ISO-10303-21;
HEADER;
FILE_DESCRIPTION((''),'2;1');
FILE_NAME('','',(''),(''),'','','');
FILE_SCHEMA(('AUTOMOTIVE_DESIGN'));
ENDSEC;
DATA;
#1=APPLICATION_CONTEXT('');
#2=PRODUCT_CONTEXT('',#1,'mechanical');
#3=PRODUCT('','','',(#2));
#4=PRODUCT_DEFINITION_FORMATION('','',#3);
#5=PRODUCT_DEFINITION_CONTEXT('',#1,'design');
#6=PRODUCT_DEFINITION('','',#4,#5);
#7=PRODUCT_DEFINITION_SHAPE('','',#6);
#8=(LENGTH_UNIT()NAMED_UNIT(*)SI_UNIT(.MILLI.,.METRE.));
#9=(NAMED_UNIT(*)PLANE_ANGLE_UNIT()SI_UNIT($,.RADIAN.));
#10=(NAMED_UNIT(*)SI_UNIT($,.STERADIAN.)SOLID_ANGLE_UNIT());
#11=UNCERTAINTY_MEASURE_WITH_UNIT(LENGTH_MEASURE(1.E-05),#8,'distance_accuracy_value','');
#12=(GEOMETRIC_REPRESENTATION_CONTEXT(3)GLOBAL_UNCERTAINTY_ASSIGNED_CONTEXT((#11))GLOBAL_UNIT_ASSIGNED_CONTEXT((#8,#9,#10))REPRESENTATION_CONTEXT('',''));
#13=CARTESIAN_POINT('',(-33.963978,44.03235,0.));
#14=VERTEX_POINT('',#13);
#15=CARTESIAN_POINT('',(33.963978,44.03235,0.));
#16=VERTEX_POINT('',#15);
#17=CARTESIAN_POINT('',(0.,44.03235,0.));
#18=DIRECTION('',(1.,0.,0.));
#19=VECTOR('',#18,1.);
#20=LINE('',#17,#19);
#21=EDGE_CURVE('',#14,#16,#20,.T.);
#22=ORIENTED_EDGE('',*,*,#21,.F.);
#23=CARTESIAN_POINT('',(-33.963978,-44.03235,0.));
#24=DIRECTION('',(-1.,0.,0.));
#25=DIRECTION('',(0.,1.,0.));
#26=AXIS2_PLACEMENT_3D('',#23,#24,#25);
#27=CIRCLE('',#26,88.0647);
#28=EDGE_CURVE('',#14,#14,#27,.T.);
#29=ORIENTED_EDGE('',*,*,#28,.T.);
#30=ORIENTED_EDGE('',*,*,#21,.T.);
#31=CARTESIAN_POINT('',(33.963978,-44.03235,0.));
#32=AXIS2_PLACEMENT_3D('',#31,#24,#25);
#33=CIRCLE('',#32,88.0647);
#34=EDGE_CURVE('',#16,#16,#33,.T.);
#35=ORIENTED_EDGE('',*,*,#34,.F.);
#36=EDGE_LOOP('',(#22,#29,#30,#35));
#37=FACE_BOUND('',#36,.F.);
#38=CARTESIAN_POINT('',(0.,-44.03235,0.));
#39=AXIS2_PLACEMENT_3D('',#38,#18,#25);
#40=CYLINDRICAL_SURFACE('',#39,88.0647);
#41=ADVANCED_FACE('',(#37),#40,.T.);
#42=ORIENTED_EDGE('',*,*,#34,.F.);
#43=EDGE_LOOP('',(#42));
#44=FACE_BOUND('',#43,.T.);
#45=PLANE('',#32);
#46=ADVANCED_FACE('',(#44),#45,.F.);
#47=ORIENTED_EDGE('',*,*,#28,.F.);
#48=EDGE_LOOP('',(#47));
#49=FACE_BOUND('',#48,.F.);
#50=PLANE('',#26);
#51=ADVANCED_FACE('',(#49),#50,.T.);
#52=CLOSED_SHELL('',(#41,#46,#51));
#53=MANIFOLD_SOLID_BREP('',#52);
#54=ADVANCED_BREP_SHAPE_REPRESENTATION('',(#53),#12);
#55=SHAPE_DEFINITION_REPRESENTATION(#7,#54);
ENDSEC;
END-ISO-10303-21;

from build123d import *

# Parameters (mm, degrees)
F0_W = 67.9279565811
F0_H = 88.0647003651


# Not quite as in the source:
# - a feature of the source that left no trace in its solid (it failed there, or was rolled back) is left out


with BuildPart() as f1:
    # F0 (on Top) → F1 (revolve)
    with BuildSketch(Plane.XY):
        Rectangle(F0_W, F0_H)
    revolve(axis=Axis((0, -44.0323501825, 0), (-1, 0, 0)))


solid = f1.part
